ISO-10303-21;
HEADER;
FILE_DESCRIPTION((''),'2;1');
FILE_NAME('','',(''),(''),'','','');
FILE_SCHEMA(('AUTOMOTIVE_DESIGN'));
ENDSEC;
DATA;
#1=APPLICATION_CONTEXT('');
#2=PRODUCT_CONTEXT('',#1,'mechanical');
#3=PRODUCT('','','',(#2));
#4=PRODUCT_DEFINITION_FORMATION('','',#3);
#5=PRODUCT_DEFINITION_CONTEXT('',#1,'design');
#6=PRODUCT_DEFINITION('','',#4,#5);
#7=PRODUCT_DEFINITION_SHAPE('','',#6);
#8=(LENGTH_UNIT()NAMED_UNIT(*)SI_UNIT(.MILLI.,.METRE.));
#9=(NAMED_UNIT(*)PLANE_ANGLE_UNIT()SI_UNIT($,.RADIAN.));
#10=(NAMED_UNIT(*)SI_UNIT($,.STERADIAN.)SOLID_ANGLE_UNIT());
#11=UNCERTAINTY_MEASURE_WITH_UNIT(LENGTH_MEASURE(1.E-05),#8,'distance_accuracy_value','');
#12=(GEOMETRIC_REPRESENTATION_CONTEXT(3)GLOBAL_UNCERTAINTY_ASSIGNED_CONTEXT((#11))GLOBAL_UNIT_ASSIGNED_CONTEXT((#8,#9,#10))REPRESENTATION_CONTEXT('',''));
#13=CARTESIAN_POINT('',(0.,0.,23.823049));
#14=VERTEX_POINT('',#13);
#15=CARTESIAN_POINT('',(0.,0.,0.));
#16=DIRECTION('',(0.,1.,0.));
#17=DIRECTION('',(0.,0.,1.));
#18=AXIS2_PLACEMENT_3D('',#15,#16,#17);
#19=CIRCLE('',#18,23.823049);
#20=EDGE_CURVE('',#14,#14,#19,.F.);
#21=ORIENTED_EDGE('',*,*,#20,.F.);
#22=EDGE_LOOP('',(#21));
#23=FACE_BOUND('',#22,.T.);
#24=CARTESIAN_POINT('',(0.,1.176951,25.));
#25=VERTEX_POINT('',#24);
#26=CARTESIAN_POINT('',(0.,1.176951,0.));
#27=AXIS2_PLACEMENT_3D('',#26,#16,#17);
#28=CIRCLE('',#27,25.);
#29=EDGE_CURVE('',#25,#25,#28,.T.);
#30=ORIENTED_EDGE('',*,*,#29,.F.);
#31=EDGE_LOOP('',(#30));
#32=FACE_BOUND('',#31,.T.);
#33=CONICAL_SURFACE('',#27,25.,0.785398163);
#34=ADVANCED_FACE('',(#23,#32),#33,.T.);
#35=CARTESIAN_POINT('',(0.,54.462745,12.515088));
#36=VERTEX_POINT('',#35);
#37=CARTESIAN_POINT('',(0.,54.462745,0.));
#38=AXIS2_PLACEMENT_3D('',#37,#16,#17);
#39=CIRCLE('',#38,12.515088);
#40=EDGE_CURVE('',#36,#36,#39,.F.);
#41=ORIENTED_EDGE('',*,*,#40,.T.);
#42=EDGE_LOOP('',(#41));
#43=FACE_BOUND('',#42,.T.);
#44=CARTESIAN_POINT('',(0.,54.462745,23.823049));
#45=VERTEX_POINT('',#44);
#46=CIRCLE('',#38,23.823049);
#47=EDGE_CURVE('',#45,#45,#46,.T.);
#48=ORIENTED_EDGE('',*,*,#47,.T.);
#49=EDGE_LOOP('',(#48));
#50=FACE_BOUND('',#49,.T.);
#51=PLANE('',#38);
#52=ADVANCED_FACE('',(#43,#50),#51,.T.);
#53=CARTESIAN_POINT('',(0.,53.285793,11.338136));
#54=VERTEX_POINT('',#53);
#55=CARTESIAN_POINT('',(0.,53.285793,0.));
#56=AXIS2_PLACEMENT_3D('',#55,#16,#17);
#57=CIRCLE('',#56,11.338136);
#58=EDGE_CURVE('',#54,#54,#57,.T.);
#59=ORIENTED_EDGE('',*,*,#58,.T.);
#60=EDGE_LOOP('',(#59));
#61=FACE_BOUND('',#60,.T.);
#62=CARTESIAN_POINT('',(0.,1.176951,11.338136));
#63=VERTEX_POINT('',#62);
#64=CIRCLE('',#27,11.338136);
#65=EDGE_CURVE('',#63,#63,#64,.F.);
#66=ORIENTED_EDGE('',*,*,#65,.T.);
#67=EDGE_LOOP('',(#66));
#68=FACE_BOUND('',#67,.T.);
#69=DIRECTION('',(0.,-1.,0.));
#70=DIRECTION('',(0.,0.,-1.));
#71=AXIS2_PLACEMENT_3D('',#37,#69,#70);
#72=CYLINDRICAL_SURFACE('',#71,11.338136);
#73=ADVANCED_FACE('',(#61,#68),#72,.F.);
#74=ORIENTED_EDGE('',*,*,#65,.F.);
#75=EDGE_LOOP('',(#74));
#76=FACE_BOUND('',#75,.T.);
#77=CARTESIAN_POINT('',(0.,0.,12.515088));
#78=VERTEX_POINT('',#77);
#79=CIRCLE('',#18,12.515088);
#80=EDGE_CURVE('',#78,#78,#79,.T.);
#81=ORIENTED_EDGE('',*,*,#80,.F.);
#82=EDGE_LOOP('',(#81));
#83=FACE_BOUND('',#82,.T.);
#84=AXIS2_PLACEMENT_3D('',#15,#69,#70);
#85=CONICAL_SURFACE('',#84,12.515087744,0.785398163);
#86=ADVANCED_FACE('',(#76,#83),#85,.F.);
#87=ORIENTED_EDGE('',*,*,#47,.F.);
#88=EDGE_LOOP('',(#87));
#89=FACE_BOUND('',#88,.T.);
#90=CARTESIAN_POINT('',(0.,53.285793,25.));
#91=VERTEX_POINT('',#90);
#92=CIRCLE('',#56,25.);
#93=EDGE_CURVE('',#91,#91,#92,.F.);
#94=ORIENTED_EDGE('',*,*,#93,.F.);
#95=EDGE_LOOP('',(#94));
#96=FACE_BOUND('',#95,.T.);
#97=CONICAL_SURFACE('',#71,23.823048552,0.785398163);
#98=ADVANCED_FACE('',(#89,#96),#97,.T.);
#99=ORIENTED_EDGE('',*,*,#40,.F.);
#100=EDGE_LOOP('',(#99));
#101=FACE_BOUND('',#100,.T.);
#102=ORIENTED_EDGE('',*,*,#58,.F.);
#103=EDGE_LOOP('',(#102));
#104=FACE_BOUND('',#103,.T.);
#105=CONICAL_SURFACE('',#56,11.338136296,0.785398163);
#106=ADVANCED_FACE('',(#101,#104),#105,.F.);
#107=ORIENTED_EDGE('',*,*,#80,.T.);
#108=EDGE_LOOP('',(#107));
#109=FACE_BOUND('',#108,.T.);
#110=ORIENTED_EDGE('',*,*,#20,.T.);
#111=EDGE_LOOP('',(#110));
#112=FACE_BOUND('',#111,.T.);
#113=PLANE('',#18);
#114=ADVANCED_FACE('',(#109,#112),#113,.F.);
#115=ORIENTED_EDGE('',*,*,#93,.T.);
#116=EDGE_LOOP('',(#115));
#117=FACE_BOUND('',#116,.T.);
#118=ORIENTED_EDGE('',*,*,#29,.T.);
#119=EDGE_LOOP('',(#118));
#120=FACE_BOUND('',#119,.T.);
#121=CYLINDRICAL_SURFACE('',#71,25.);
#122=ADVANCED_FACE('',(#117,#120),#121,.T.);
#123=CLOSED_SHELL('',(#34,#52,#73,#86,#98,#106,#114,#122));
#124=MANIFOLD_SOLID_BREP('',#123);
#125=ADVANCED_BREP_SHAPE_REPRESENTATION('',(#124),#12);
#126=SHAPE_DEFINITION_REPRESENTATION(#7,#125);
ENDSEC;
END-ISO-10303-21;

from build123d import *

# Parameters (mm, degrees)
SKETCH1_R           = 25
BOSS_EXTRUDE1_DEPTH = 54.462744785
SKETCH2_R           = 11.338136296
CUT_EXTRUDE1_DEPTH  = 65.93219979
CHAMFER1_SIZE       = 1.176951448


with BuildPart() as part:
    # Sketch1 → Boss-Extrude1 (new body)
    with BuildSketch(Plane(origin=(0, 0, 0), x_dir=(1, 0, 0), z_dir=(0, 1, 0))):
        Circle(SKETCH1_R)
    extrude(amount=BOSS_EXTRUDE1_DEPTH)

    # Sketch2 → Cut-Extrude1 (cut, through all)
    with BuildSketch(Plane(origin=(0, 0, 0), x_dir=(1, 0, 0), z_dir=(0, 1, 0))):
        Circle(SKETCH2_R)
    extrude(amount=CUT_EXTRUDE1_DEPTH, mode=Mode.SUBTRACT)

    # Chamfer1
    chamfer1_edges = [part.edges().sort_by_distance(p)[0] for p in [
        (-11.338136296, 54.462744785, 0),
        (-11.338136296, 0, 0),
        (-25, 0, 0),
        (-25, 54.462744785, 0),
    ]]
    chamfer(chamfer1_edges, length=CHAMFER1_SIZE)


solid = part.part
